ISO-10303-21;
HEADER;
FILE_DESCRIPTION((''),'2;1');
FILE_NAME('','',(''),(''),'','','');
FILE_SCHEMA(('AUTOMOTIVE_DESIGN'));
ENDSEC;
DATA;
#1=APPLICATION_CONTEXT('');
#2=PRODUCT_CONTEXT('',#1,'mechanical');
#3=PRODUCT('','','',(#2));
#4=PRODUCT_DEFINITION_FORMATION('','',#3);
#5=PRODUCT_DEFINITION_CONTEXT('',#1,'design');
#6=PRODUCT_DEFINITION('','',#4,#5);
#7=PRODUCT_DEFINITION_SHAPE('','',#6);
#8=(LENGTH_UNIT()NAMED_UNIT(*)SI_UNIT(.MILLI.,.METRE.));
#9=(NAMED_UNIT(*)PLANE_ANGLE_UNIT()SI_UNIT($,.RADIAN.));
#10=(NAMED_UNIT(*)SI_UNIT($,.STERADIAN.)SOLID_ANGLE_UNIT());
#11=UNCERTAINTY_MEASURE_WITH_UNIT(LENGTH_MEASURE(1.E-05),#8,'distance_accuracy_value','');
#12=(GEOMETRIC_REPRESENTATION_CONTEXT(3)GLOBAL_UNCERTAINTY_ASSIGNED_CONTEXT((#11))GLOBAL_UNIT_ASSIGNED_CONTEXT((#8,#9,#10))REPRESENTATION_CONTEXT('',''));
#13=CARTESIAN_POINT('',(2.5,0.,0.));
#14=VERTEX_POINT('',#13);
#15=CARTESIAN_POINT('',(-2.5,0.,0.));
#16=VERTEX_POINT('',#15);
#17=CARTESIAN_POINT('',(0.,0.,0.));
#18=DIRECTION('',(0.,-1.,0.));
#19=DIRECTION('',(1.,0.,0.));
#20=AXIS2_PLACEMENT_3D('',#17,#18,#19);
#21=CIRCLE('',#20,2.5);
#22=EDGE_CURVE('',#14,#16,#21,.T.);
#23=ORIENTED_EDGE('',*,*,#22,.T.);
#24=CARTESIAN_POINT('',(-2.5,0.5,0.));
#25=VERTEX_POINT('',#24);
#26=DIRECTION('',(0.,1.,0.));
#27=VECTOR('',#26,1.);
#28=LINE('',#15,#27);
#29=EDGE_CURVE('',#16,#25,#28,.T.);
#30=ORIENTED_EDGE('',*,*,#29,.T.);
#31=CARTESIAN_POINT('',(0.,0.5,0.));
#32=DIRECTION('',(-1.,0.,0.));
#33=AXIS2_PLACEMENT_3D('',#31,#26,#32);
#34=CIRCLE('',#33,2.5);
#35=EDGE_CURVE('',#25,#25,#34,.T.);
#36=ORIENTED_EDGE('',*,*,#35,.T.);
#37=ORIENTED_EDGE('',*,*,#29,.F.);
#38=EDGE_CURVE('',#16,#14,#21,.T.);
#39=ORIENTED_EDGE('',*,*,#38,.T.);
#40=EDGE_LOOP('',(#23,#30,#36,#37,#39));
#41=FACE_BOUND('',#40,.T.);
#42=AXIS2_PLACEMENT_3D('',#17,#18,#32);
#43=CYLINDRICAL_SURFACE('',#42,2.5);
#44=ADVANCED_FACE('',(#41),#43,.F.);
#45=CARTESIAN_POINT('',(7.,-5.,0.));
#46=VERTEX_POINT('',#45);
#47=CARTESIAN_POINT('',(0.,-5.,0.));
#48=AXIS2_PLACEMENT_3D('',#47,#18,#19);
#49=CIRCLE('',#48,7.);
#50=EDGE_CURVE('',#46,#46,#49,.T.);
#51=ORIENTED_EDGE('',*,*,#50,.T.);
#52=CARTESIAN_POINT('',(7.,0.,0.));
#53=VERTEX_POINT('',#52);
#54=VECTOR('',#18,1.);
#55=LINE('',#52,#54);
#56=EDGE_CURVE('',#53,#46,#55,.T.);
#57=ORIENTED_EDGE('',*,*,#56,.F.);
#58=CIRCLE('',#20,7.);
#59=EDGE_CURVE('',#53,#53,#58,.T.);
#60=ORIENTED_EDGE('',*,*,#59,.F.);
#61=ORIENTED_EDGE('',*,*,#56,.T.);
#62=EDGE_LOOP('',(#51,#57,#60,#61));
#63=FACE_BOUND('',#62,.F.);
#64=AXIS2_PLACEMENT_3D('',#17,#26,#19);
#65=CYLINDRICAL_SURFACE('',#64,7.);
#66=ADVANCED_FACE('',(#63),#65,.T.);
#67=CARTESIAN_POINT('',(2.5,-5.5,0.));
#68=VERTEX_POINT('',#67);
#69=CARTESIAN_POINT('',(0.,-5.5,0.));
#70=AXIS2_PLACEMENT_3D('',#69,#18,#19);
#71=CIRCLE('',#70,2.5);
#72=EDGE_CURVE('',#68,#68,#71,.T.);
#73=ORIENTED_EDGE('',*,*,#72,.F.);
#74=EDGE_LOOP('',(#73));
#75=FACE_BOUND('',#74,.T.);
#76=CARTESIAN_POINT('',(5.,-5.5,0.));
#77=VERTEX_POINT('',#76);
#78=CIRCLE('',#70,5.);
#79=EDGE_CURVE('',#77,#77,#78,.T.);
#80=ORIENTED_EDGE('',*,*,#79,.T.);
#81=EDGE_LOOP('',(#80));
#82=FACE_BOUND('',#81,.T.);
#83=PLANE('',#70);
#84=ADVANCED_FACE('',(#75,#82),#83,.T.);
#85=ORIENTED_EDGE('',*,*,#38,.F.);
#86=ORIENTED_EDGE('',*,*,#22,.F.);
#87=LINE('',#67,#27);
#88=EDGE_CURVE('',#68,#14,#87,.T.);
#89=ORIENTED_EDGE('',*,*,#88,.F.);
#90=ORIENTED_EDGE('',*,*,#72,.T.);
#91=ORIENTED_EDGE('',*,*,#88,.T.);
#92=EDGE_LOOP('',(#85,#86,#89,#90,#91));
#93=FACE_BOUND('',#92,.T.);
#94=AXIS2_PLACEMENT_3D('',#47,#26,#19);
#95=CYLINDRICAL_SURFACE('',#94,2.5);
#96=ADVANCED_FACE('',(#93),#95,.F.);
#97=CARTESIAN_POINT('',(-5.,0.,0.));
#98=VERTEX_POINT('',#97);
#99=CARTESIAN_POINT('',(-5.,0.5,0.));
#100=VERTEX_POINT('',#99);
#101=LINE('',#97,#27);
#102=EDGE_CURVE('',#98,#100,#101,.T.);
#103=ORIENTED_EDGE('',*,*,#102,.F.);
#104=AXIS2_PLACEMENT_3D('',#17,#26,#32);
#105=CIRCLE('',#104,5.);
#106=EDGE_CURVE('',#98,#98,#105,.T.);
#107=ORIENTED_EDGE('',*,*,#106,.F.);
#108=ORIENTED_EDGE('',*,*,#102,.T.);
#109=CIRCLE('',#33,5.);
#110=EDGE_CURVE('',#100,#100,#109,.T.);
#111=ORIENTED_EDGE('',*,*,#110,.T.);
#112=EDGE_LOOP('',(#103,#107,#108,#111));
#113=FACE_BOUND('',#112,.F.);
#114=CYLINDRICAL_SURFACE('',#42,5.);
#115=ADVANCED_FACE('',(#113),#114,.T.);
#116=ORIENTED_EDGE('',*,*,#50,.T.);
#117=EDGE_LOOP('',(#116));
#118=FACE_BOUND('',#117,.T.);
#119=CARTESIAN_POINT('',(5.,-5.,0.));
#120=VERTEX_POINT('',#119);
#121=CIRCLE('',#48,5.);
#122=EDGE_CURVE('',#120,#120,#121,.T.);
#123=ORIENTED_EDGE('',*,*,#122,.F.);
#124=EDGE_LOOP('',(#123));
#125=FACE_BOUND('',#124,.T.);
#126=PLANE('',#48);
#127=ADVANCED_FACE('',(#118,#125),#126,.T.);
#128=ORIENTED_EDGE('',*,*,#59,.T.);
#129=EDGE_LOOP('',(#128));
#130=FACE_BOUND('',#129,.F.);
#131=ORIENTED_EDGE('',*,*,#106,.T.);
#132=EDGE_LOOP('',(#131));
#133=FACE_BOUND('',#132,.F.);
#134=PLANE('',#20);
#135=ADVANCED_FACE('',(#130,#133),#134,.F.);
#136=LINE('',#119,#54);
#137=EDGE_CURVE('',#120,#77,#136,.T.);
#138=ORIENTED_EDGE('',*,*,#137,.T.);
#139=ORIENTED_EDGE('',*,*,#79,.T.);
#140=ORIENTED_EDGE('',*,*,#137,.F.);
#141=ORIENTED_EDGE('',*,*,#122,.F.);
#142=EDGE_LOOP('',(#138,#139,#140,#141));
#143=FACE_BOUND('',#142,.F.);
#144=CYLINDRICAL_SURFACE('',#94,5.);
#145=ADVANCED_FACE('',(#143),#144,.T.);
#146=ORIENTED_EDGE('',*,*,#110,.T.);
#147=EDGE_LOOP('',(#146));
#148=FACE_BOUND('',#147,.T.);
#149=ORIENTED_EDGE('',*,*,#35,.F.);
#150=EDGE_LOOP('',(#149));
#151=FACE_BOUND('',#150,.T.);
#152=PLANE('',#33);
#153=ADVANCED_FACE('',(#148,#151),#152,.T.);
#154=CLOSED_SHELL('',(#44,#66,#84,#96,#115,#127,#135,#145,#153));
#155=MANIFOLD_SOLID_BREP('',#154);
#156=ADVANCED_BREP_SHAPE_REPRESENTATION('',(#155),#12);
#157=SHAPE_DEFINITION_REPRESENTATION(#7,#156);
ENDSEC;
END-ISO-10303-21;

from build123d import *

# Parameters (mm, degrees)
F0_R     = 7
F0_R_2   = 2.5
F1_DEPTH = 5
F2_R     = 5
F2_R_2   = 2.5
F3_DEPTH = 0.5
F4_R     = 5
F4_R_2   = 2.5
F5_DEPTH = 0.5


with BuildPart() as f1:
    # F0 (on Front) → F1 (new body)
    with BuildSketch(Plane.XZ):
        Circle(F0_R)
        Circle(F0_R_2, mode=Mode.SUBTRACT)
    extrude(amount=F1_DEPTH)

    # F2 (on face) → F3 (join)
    with BuildSketch(Plane.XZ.offset(5)):
        Circle(F2_R)
        Circle(F2_R_2, mode=Mode.SUBTRACT)
    extrude(amount=F3_DEPTH)

    # F4 (on face) → F5 (join)
    with BuildSketch(Plane(origin=(0, 0, 0), x_dir=(-1, 0, 0), z_dir=(0, 1, 0))):
        Circle(F4_R)
        Circle(F4_R_2, mode=Mode.SUBTRACT)
    extrude(amount=F5_DEPTH)


solid = f1.part
